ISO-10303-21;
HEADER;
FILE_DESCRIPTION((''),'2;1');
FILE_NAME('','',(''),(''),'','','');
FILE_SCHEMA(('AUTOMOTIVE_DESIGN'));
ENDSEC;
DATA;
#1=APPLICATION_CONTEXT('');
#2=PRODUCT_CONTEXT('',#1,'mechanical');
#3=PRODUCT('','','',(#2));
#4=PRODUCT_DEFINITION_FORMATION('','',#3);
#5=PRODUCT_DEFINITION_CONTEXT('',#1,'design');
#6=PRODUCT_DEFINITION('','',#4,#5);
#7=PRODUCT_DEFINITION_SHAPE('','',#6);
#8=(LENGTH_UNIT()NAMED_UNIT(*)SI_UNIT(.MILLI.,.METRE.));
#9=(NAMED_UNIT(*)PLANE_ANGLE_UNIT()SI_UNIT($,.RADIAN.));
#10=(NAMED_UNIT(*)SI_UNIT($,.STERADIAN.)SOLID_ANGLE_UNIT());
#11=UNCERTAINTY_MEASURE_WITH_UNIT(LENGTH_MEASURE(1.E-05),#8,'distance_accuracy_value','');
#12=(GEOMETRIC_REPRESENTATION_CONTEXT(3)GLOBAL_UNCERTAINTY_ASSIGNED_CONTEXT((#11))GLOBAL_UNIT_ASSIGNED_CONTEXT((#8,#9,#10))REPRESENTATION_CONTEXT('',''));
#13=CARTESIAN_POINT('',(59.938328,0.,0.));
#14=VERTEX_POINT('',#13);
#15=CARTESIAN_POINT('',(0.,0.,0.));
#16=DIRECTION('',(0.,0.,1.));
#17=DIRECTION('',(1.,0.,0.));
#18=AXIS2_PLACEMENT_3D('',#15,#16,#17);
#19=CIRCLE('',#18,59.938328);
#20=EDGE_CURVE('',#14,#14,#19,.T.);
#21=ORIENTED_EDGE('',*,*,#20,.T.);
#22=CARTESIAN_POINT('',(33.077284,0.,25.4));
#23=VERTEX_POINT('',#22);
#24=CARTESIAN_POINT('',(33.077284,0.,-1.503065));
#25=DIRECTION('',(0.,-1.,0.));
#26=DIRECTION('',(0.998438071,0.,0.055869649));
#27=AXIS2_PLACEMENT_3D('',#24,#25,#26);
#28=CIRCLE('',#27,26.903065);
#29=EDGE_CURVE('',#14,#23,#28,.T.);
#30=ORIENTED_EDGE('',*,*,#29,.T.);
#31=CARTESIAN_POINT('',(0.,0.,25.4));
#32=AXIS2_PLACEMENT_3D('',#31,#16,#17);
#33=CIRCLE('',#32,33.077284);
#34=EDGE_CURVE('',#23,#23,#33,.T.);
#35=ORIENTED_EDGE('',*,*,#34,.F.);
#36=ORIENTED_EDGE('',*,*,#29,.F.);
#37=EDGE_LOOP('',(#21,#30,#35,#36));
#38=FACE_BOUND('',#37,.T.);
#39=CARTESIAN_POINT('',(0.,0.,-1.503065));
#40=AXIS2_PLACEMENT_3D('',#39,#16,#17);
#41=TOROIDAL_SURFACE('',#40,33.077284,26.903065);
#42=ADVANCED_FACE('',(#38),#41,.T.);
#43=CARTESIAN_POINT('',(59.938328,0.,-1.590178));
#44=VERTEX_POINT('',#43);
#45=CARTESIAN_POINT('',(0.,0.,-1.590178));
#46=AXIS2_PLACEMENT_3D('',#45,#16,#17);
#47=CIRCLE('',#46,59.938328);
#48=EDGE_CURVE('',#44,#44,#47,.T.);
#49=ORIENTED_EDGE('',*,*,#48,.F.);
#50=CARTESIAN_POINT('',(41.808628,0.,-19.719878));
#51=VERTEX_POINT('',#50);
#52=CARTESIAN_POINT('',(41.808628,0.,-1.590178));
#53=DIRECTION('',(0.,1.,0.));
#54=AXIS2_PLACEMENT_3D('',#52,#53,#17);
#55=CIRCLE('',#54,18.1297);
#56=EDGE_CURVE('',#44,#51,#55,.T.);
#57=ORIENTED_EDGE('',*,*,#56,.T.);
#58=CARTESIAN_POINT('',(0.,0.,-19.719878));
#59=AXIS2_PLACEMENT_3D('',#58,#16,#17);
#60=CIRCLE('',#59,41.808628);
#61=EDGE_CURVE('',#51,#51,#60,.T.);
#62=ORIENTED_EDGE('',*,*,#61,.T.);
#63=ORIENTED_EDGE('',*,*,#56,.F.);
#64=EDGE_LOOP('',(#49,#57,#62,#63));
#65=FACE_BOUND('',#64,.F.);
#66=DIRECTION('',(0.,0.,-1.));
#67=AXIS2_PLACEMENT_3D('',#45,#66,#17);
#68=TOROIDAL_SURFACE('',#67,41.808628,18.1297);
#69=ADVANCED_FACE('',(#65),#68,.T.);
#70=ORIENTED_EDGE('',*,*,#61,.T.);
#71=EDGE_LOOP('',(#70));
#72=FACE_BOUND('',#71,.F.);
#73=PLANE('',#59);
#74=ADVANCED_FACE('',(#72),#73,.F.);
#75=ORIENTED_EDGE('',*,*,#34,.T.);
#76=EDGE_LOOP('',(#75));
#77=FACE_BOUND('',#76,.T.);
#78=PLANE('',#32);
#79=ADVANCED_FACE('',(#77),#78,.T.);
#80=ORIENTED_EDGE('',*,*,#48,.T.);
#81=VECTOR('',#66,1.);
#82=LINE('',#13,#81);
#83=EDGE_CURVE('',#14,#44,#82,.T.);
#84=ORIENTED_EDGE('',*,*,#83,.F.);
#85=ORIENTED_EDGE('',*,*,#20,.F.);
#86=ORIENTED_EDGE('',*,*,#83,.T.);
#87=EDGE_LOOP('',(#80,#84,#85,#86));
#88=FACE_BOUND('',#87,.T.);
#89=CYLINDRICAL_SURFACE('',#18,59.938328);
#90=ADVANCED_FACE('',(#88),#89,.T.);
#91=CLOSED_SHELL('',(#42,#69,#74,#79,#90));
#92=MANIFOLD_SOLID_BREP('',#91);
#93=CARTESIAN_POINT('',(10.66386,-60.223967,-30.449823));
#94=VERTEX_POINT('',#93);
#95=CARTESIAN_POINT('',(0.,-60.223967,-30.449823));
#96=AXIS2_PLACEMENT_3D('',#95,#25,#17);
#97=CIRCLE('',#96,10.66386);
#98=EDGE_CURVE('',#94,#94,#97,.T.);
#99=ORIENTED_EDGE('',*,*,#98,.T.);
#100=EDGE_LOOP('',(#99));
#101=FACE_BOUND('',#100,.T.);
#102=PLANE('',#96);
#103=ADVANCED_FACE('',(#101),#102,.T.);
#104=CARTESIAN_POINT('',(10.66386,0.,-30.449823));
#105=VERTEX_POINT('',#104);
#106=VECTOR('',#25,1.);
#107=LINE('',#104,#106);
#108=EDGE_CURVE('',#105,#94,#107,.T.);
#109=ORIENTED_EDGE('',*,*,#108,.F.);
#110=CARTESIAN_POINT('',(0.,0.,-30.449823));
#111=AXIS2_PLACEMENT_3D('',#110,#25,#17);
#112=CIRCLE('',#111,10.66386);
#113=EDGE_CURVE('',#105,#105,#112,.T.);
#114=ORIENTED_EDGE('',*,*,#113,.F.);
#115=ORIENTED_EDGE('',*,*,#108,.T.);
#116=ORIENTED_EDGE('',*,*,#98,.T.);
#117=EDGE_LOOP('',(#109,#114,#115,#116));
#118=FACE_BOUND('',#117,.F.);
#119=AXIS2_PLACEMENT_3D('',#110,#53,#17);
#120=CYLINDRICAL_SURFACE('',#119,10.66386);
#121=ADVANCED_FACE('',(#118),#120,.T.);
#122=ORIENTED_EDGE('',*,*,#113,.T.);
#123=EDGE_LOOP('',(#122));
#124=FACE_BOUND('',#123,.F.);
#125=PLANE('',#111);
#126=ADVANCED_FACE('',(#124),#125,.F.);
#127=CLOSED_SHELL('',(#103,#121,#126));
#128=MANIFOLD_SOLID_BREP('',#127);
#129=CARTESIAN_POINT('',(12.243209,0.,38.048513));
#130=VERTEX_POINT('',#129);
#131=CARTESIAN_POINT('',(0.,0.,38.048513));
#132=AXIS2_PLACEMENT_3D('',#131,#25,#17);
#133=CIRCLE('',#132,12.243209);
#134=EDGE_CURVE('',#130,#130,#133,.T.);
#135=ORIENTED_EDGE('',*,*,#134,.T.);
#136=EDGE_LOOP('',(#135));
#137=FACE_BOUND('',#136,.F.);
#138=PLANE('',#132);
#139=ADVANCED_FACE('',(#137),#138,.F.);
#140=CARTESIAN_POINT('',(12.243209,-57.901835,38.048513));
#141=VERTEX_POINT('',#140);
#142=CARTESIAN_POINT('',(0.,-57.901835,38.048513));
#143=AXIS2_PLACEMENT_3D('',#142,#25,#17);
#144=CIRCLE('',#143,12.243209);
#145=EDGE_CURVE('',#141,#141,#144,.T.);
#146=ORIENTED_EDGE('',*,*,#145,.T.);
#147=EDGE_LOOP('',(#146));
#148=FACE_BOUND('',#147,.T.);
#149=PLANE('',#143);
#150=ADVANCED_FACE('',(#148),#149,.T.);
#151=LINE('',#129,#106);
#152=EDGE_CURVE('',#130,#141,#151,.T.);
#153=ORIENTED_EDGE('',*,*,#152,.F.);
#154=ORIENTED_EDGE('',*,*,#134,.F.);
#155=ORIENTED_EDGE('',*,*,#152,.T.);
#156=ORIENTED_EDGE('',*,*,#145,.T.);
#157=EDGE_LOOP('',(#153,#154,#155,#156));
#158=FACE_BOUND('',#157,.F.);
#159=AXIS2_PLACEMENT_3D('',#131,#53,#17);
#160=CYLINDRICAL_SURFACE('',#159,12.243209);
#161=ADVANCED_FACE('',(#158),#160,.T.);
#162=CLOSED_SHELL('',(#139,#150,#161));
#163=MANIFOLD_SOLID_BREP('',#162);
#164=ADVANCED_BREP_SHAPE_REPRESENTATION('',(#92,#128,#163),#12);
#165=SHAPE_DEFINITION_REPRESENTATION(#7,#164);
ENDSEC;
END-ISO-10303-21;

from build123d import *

# Parameters (mm, degrees)
F0_R     = 59.9383278597
F2_DEPTH = 25.4
F1_R     = 59.9383278597
F4_DEPTH = 19.7198782116
F5_R     = 18.1296998075
F6_R     = 12.2432091335
F7_DEPTH = 57.9018350691
F8_R     = 10.663859886
F9_DEPTH = 60.2239668369


# Not quite as in the source:
# - a fillet or chamfer that OpenCascade refuses, or shapes differently, is made with other operations: its cross-section is extruded or revolved along the edge and cut away or added


with BuildPart() as f2:
    # F0 (on Top) → F2 (new body)
    with BuildSketch(Plane.XY):
        Circle(F0_R)
    extrude(amount=F2_DEPTH)

    # F3: fillet of radius 26.9030647894 on 1 edges, made by hand

    # F3_s1 → F3_t2 (revolve, cut)
    with BuildSketch(Plane.XZ):
        with BuildLine():
            ThreePointArc((59.9383278597, 0), (51.5615722779, 18.044466314), (33.0772837381, 25.4))
            Line((33.0772837381, 25.4), (59.9383278597, 25.4))
            Line((59.9383278597, 25.4), (59.9383278597, 0))
        make_face()
    revolve(axis=Axis((0, 0, 25.4), (0, 0, 1)), mode=Mode.SUBTRACT)

    # F1 (on face) → F4 (join)
    with BuildSketch(Plane.XY):
        Circle(F1_R)
    extrude(amount=-F4_DEPTH)

    # F5
    f5_edges = [f2.edges().sort_by_distance(p)[0] for p in [
        (-59.938328, 0, -19.719878),
    ]]
    fillet(f5_edges, radius=F5_R)


with BuildPart() as f7:
    # F6 (on Front) → F7 (new body)
    with BuildSketch(Plane.XZ):
        with Locations((0, 38.0485132337)):
            Circle(F6_R)
    extrude(amount=F7_DEPTH)


with BuildPart() as f9:
    # F8 (on Front) → F9 (new body)
    with BuildSketch(Plane.XZ):
        with Locations((0, -30.4498225451)):
            Circle(F8_R)
    extrude(amount=F9_DEPTH)


solid = Compound([f2.part, f7.part, f9.part])
